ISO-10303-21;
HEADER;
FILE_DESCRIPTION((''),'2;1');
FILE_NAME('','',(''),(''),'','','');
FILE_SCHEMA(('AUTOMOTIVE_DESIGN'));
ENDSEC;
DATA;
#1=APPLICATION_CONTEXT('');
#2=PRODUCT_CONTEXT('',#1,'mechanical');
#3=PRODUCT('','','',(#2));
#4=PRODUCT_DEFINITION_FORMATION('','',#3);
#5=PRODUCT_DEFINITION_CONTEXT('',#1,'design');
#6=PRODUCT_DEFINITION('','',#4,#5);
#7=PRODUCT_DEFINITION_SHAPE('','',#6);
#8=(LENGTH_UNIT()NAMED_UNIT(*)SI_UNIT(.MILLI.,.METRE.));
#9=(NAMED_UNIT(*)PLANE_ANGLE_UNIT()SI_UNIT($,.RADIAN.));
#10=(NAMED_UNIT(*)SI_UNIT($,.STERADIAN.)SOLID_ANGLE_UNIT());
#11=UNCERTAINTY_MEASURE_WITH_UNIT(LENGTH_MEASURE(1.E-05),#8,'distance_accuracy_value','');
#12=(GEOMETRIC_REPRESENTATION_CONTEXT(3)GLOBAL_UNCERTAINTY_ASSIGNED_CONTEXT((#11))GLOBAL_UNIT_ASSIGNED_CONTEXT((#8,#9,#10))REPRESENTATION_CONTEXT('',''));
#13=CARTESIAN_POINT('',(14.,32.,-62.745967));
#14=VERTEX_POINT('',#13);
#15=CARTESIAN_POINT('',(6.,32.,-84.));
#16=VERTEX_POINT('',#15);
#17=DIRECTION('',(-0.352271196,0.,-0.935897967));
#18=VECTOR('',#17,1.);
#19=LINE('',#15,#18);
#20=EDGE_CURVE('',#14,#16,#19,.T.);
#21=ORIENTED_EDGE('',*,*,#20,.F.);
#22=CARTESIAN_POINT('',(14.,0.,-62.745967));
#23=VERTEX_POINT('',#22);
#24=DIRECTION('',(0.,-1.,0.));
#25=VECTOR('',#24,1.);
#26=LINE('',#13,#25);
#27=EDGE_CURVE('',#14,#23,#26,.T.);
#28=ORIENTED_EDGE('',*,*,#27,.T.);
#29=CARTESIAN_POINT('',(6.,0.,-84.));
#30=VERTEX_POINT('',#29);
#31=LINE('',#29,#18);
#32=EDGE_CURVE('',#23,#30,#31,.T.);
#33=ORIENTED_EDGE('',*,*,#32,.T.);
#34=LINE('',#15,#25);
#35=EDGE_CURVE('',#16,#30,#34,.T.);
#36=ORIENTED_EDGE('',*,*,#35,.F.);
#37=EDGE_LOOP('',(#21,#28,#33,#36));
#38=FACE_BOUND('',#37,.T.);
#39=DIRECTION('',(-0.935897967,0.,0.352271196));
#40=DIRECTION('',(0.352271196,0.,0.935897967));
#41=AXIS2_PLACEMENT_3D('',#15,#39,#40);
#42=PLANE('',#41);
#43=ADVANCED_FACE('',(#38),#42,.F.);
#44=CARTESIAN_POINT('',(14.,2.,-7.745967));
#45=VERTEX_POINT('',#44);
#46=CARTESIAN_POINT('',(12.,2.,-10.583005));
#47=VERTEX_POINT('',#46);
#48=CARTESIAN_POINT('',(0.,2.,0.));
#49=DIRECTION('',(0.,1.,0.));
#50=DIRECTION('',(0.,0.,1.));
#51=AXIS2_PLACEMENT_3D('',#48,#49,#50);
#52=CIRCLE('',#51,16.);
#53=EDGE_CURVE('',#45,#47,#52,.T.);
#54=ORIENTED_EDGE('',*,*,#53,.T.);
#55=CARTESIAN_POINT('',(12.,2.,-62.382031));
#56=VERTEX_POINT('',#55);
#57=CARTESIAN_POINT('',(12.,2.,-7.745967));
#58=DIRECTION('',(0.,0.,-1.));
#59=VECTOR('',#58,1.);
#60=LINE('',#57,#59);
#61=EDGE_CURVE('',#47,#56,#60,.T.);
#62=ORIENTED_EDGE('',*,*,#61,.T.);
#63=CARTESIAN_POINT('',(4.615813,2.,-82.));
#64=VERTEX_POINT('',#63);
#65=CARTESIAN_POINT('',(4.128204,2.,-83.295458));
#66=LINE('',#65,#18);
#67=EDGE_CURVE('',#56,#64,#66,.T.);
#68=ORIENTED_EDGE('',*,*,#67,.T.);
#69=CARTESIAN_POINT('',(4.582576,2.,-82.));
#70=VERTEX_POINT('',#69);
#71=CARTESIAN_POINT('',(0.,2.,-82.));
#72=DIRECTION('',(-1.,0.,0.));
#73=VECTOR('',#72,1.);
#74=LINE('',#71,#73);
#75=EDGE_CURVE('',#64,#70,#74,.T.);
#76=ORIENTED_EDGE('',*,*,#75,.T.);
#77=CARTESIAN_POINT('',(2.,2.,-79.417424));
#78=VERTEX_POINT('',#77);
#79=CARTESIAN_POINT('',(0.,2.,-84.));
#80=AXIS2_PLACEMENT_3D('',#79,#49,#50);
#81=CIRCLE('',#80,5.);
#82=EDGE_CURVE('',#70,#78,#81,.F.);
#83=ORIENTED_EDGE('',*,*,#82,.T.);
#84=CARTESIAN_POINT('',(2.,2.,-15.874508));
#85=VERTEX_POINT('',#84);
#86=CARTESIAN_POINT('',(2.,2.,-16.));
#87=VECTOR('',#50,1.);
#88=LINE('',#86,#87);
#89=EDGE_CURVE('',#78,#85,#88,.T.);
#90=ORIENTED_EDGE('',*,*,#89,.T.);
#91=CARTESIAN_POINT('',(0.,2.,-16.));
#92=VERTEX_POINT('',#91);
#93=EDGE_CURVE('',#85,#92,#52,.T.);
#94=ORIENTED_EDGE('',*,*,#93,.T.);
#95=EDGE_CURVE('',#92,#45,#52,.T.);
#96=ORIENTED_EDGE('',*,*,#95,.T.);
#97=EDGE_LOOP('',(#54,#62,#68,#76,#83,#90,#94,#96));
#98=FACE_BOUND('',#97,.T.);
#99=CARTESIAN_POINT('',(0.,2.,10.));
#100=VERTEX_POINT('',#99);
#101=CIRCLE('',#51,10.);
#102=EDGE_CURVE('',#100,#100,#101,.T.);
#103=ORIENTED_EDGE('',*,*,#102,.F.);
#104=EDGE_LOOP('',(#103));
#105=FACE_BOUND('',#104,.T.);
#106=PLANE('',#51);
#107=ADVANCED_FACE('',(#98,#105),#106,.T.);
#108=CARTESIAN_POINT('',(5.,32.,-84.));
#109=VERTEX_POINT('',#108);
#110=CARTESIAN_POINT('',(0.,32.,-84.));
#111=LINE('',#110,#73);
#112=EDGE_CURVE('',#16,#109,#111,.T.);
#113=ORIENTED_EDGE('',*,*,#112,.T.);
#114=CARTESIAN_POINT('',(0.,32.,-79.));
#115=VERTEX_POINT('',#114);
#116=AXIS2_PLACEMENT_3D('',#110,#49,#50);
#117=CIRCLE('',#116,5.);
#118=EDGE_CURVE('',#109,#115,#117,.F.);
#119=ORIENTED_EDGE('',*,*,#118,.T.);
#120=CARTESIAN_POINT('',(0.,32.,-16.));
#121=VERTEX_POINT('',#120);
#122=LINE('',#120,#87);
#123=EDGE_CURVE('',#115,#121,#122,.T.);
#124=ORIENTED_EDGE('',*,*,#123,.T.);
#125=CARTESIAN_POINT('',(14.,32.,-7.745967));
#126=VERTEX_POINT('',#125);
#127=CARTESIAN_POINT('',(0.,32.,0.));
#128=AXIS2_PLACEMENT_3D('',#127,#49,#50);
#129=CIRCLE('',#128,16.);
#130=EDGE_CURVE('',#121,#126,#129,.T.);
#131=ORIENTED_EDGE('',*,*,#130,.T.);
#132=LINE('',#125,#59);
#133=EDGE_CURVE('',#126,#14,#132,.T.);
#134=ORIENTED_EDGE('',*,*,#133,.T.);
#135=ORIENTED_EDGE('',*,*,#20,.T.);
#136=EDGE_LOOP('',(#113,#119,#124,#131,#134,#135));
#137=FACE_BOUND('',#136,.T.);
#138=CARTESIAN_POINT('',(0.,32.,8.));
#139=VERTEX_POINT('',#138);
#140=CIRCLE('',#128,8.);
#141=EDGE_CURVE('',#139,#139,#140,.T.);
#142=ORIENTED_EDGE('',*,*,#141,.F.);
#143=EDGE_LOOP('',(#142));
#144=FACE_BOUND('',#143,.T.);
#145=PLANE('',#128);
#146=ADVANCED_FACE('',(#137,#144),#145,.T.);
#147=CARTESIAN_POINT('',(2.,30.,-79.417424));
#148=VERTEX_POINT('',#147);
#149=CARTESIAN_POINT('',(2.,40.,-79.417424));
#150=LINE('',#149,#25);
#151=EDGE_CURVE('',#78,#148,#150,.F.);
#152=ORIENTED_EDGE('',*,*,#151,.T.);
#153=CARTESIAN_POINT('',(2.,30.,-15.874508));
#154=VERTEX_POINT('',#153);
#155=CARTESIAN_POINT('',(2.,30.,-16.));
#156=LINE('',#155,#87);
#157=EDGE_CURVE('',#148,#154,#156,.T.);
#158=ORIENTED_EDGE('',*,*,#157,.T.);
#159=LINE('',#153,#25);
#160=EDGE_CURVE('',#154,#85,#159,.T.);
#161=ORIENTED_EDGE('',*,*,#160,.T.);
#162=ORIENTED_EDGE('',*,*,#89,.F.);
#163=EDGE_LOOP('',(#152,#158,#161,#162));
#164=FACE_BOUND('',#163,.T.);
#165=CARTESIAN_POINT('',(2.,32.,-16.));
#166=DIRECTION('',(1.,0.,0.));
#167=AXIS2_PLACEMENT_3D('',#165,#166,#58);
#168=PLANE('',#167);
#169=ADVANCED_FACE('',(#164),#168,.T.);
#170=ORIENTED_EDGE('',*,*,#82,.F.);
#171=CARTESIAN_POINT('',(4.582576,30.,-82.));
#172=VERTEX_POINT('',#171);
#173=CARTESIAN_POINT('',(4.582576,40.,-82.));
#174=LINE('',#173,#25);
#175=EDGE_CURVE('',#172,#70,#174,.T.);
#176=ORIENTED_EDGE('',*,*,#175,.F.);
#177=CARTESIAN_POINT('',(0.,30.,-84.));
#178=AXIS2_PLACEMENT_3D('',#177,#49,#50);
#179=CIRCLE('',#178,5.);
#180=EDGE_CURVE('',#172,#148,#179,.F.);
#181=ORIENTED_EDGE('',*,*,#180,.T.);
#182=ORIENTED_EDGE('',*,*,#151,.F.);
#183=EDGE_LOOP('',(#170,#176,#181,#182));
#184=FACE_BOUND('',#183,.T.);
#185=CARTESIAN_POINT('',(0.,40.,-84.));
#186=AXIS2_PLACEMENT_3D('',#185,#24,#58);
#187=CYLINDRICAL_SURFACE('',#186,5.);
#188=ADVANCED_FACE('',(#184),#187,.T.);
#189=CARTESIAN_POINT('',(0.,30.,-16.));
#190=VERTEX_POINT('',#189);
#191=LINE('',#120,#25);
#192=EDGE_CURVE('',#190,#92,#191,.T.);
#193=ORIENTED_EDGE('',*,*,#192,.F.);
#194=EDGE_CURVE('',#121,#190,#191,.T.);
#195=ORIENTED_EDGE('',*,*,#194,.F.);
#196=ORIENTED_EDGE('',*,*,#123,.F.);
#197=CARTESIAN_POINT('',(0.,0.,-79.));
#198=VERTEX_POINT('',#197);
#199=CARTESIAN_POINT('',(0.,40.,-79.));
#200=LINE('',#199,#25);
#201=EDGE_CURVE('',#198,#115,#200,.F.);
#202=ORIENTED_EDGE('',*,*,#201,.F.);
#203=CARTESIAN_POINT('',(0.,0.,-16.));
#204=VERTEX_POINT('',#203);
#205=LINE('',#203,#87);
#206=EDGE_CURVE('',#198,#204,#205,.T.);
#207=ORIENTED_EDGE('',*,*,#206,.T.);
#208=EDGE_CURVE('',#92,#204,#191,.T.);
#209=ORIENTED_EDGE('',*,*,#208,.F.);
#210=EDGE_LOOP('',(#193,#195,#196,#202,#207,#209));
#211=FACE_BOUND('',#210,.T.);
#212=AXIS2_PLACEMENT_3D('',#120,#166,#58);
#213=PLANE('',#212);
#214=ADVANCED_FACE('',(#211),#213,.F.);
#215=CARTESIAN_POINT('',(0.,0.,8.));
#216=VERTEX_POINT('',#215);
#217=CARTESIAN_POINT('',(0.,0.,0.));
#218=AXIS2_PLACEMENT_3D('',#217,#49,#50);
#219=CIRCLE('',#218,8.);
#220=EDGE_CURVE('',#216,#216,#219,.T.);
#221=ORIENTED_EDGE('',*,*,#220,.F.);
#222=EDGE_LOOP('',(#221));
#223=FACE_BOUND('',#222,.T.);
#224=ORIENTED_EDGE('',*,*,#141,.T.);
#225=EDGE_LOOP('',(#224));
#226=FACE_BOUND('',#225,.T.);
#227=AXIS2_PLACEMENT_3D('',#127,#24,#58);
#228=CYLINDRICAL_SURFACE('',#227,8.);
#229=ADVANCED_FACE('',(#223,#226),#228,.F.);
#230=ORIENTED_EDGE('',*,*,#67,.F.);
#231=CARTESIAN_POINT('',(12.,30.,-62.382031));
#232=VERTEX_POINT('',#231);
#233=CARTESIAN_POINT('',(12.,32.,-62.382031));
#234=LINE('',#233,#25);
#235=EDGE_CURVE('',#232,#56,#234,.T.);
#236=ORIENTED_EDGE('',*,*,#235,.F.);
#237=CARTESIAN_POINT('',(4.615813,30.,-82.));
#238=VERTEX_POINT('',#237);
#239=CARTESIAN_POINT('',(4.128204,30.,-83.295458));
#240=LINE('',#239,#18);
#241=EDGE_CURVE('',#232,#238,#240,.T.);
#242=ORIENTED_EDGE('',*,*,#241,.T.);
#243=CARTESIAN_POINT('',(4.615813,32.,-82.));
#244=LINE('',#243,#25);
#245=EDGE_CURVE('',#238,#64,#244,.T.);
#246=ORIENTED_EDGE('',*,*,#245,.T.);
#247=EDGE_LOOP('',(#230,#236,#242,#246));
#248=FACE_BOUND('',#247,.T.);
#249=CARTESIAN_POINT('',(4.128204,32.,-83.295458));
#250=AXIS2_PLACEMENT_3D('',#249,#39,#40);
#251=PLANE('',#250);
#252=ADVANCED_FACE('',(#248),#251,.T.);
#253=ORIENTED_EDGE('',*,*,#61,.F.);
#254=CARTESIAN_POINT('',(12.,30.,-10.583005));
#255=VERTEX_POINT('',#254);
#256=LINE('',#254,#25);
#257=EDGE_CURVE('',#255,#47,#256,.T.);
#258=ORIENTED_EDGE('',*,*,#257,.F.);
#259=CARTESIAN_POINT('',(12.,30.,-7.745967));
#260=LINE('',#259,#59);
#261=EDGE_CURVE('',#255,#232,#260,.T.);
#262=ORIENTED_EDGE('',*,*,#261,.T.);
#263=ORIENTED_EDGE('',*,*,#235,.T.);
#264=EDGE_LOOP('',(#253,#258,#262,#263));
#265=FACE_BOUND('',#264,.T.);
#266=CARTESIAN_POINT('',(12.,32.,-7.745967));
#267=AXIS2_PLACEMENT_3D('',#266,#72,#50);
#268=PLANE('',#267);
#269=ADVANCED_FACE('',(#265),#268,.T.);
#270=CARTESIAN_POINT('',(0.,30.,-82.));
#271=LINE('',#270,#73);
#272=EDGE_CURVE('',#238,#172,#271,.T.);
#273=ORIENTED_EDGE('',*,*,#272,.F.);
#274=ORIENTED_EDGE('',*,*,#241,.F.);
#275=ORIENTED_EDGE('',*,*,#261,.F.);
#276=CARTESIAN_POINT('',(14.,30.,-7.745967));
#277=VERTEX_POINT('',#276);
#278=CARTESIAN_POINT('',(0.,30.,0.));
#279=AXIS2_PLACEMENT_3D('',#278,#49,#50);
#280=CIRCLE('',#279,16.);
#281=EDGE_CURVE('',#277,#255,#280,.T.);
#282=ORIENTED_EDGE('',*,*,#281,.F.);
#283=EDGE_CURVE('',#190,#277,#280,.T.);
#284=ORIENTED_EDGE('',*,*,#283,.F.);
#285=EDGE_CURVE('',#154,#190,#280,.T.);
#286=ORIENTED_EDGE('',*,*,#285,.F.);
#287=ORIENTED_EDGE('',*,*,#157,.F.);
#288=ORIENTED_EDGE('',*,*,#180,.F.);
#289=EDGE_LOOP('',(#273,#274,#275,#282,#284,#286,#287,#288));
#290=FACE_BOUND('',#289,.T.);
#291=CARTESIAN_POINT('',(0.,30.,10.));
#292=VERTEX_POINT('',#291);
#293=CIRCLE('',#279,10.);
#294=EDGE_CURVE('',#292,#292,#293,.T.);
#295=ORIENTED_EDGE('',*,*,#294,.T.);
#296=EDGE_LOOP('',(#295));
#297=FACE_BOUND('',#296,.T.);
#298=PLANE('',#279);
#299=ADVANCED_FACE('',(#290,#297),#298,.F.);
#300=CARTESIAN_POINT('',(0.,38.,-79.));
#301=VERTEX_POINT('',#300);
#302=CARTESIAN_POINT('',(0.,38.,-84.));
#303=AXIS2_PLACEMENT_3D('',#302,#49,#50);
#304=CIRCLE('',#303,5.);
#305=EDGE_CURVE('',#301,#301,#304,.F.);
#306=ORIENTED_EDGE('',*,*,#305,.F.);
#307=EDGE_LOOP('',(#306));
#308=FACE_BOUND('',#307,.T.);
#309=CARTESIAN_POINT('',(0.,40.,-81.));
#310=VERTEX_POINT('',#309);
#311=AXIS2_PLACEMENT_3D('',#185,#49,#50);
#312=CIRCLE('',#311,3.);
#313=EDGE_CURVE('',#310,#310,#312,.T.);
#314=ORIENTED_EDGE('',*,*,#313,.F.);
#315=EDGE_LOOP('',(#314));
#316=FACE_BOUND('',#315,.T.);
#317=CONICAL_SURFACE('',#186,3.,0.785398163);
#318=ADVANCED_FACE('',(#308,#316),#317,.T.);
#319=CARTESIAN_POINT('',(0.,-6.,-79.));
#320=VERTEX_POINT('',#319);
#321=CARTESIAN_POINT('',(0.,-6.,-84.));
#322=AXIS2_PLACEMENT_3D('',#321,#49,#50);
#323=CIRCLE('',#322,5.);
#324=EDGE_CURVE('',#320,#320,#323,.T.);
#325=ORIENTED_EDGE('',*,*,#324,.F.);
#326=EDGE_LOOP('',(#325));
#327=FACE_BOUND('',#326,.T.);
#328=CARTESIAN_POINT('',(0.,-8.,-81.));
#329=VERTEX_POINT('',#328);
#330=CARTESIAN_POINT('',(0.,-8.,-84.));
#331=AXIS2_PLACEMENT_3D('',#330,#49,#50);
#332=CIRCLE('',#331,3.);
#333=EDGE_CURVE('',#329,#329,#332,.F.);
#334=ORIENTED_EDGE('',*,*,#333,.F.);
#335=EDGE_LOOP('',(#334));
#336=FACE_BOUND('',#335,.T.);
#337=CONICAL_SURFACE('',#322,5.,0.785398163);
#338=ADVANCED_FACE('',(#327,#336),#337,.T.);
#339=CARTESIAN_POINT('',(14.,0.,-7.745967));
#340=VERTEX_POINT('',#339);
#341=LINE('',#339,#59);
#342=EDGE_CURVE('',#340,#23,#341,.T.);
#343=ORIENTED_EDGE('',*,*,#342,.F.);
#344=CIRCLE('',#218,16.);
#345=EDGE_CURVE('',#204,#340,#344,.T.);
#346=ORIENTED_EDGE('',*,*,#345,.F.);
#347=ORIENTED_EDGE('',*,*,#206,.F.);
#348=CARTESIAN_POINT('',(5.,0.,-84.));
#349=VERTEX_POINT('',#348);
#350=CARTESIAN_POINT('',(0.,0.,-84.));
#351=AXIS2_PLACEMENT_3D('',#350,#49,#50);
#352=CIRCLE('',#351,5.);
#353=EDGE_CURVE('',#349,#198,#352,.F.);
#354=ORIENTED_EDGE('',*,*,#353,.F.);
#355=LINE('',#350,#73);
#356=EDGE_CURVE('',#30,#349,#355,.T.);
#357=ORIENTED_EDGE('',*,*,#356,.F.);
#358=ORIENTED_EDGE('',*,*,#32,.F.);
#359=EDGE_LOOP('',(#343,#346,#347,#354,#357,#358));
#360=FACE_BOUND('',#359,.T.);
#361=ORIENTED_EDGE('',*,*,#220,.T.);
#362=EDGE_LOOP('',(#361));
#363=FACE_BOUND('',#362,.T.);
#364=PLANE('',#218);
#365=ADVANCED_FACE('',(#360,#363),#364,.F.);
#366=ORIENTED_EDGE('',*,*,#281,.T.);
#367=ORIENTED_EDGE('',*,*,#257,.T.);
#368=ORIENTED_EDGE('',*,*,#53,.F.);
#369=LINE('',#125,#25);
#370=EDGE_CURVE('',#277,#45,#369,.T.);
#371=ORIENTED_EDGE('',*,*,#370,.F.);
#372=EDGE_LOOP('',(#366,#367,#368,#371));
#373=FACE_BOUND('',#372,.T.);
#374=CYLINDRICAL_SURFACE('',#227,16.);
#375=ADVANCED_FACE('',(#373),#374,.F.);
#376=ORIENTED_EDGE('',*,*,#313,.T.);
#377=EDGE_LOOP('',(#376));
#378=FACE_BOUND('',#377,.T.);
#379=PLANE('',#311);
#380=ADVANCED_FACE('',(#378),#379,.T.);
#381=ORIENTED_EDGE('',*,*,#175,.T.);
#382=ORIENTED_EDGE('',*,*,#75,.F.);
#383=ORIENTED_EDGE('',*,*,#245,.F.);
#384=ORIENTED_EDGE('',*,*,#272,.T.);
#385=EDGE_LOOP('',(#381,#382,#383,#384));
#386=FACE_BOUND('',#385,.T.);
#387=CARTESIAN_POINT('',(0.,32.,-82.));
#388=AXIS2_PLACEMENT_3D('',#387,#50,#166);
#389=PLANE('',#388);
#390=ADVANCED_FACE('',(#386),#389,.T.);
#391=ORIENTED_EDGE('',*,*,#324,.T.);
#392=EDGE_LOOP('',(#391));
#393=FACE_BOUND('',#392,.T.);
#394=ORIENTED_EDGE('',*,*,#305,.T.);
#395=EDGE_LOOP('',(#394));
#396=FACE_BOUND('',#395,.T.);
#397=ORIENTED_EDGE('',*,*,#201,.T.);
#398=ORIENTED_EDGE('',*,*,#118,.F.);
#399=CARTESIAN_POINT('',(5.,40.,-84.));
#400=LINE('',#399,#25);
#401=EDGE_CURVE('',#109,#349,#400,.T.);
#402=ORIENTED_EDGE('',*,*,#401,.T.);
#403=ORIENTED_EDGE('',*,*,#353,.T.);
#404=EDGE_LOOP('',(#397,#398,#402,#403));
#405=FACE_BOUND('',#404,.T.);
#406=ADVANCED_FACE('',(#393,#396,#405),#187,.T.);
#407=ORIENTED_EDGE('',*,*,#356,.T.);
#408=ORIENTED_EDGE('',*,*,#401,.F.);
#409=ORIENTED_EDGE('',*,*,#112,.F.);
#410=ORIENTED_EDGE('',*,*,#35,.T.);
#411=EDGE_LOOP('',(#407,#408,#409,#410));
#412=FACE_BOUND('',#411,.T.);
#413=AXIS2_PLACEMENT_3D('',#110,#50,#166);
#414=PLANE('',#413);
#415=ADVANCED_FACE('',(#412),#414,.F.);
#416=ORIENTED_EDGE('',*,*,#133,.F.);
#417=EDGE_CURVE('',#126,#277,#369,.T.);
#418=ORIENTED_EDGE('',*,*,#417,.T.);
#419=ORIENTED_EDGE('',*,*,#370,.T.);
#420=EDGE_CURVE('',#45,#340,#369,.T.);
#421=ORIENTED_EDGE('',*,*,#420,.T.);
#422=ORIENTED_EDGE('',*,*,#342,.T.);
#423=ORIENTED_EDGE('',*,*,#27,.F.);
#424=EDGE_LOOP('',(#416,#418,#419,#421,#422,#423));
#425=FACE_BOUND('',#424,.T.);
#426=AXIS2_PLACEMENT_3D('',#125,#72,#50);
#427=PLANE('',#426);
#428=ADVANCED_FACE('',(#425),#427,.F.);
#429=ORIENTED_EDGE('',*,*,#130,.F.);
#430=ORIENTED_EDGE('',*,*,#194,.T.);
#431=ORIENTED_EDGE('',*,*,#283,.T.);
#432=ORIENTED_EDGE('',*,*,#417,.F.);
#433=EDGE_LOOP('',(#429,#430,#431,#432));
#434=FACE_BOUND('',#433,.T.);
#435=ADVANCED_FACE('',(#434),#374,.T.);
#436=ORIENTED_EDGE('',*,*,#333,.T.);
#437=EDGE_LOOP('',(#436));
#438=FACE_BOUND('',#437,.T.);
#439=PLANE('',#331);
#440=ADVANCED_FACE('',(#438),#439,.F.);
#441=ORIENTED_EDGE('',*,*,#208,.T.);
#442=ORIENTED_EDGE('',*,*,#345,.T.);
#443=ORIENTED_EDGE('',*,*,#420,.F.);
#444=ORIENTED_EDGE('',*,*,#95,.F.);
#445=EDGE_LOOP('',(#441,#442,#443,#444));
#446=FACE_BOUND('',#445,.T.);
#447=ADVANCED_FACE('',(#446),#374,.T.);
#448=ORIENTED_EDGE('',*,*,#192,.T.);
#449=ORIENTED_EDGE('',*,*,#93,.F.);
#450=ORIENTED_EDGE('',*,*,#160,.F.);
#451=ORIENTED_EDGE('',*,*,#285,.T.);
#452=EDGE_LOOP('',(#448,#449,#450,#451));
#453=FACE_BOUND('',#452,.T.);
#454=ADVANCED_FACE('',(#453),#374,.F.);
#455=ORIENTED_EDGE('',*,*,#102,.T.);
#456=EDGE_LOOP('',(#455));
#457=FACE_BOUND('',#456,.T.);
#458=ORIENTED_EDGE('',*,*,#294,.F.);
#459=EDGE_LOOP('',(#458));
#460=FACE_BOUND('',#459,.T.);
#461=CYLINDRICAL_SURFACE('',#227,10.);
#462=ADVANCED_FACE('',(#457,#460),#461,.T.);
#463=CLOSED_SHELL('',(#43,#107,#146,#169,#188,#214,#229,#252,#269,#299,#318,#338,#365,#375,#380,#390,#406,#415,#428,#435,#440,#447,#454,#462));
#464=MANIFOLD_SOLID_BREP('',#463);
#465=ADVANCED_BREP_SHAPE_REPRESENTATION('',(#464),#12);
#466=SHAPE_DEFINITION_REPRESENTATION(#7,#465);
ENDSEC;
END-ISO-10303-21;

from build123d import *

# Parameters (mm, degrees)
SKETCH1_R                = 8
BOSS_EXTRUDE1_DEPTH      = 32
SHELL3_START             = 2
SHELL3_OUTLINE_R         = 10
SHELL3_DEPTH             = 28
BOSS_EXTRUDE2_DEPTH      = 8
BOSS_EXTRUDE2_DEPTH_BACK = 40
SKETCH2_R                = 5
CHAMFER1_SIZE            = 2


# Read off the part's stored shape, not the designer's step: Shell3
with BuildPart() as part:
    # Sketch1 → Boss-Extrude1 (new body)
    with BuildSketch(Plane(origin=(0, 0, 0), x_dir=(1, 0, 0), z_dir=(0, 1, 0))):
        with BuildLine():
            Line((6, 84), (14, 62.745966692))
            Line((14, 62.745966692), (14, 7.745966692))
            ThreePointArc((14, 7.745966692), (-8.126024025, -13.782878275), (0, 16))
            Line((0, 16), (0, 84))
            Line((0, 84), (6, 84))
        make_face()
        with Locations(Location((0, 0, 0), (0, 0, 270))):
            Circle(SKETCH1_R, mode=Mode.SUBTRACT)
    extrude(amount=BOSS_EXTRUDE1_DEPTH)

    # Shell3 outline → Shell3 (cut)
    with BuildSketch(Plane(origin=(0, 0, 0), x_dir=(1, 0, 0), z_dir=(0, 1, 0)).offset(SHELL3_START)):
        with BuildLine():
            ThreePointArc((2, 15.874507866), (1.001966601, 15.968596148), (0, 16))
            ThreePointArc((0, 16), (-8.126024026, -13.782878275), (14, 7.745966692))
            ThreePointArc((14, 7.745966692), (13.077163184, 9.218882962), (12, 10.583005244))
            Line((12, 10.583005244), (12, 62.382030987))
            Line((12, 62.382030987), (4.615813204, 82))
            Line((4.615813204, 82), (2, 82))
            Line((2, 82), (2, 15.874507866))
        make_face()
        Circle(SHELL3_OUTLINE_R, mode=Mode.SUBTRACT)
    extrude(amount=SHELL3_DEPTH, mode=Mode.SUBTRACT)

    # Sketch2 → Boss-Extrude2 (add, two sides: drawn at the far end of the back side and taken through both)
    with BuildSketch(Plane(origin=(0, 32, 0), x_dir=(1, 0, 0), z_dir=(0, 1, 0)).offset(-BOSS_EXTRUDE2_DEPTH_BACK)):
        with Locations(Location((0, 84, 0), (0, 0, 270))):
            Circle(SKETCH2_R)
    extrude(amount=BOSS_EXTRUDE2_DEPTH + BOSS_EXTRUDE2_DEPTH_BACK)

    # Chamfer1
    chamfer1_edges = [part.edges().sort_by_distance(p)[0] for p in [
        (0, -8, -89),
        (0, 40, -89),
    ]]
    chamfer(chamfer1_edges, length=CHAMFER1_SIZE)


solid = part.part
